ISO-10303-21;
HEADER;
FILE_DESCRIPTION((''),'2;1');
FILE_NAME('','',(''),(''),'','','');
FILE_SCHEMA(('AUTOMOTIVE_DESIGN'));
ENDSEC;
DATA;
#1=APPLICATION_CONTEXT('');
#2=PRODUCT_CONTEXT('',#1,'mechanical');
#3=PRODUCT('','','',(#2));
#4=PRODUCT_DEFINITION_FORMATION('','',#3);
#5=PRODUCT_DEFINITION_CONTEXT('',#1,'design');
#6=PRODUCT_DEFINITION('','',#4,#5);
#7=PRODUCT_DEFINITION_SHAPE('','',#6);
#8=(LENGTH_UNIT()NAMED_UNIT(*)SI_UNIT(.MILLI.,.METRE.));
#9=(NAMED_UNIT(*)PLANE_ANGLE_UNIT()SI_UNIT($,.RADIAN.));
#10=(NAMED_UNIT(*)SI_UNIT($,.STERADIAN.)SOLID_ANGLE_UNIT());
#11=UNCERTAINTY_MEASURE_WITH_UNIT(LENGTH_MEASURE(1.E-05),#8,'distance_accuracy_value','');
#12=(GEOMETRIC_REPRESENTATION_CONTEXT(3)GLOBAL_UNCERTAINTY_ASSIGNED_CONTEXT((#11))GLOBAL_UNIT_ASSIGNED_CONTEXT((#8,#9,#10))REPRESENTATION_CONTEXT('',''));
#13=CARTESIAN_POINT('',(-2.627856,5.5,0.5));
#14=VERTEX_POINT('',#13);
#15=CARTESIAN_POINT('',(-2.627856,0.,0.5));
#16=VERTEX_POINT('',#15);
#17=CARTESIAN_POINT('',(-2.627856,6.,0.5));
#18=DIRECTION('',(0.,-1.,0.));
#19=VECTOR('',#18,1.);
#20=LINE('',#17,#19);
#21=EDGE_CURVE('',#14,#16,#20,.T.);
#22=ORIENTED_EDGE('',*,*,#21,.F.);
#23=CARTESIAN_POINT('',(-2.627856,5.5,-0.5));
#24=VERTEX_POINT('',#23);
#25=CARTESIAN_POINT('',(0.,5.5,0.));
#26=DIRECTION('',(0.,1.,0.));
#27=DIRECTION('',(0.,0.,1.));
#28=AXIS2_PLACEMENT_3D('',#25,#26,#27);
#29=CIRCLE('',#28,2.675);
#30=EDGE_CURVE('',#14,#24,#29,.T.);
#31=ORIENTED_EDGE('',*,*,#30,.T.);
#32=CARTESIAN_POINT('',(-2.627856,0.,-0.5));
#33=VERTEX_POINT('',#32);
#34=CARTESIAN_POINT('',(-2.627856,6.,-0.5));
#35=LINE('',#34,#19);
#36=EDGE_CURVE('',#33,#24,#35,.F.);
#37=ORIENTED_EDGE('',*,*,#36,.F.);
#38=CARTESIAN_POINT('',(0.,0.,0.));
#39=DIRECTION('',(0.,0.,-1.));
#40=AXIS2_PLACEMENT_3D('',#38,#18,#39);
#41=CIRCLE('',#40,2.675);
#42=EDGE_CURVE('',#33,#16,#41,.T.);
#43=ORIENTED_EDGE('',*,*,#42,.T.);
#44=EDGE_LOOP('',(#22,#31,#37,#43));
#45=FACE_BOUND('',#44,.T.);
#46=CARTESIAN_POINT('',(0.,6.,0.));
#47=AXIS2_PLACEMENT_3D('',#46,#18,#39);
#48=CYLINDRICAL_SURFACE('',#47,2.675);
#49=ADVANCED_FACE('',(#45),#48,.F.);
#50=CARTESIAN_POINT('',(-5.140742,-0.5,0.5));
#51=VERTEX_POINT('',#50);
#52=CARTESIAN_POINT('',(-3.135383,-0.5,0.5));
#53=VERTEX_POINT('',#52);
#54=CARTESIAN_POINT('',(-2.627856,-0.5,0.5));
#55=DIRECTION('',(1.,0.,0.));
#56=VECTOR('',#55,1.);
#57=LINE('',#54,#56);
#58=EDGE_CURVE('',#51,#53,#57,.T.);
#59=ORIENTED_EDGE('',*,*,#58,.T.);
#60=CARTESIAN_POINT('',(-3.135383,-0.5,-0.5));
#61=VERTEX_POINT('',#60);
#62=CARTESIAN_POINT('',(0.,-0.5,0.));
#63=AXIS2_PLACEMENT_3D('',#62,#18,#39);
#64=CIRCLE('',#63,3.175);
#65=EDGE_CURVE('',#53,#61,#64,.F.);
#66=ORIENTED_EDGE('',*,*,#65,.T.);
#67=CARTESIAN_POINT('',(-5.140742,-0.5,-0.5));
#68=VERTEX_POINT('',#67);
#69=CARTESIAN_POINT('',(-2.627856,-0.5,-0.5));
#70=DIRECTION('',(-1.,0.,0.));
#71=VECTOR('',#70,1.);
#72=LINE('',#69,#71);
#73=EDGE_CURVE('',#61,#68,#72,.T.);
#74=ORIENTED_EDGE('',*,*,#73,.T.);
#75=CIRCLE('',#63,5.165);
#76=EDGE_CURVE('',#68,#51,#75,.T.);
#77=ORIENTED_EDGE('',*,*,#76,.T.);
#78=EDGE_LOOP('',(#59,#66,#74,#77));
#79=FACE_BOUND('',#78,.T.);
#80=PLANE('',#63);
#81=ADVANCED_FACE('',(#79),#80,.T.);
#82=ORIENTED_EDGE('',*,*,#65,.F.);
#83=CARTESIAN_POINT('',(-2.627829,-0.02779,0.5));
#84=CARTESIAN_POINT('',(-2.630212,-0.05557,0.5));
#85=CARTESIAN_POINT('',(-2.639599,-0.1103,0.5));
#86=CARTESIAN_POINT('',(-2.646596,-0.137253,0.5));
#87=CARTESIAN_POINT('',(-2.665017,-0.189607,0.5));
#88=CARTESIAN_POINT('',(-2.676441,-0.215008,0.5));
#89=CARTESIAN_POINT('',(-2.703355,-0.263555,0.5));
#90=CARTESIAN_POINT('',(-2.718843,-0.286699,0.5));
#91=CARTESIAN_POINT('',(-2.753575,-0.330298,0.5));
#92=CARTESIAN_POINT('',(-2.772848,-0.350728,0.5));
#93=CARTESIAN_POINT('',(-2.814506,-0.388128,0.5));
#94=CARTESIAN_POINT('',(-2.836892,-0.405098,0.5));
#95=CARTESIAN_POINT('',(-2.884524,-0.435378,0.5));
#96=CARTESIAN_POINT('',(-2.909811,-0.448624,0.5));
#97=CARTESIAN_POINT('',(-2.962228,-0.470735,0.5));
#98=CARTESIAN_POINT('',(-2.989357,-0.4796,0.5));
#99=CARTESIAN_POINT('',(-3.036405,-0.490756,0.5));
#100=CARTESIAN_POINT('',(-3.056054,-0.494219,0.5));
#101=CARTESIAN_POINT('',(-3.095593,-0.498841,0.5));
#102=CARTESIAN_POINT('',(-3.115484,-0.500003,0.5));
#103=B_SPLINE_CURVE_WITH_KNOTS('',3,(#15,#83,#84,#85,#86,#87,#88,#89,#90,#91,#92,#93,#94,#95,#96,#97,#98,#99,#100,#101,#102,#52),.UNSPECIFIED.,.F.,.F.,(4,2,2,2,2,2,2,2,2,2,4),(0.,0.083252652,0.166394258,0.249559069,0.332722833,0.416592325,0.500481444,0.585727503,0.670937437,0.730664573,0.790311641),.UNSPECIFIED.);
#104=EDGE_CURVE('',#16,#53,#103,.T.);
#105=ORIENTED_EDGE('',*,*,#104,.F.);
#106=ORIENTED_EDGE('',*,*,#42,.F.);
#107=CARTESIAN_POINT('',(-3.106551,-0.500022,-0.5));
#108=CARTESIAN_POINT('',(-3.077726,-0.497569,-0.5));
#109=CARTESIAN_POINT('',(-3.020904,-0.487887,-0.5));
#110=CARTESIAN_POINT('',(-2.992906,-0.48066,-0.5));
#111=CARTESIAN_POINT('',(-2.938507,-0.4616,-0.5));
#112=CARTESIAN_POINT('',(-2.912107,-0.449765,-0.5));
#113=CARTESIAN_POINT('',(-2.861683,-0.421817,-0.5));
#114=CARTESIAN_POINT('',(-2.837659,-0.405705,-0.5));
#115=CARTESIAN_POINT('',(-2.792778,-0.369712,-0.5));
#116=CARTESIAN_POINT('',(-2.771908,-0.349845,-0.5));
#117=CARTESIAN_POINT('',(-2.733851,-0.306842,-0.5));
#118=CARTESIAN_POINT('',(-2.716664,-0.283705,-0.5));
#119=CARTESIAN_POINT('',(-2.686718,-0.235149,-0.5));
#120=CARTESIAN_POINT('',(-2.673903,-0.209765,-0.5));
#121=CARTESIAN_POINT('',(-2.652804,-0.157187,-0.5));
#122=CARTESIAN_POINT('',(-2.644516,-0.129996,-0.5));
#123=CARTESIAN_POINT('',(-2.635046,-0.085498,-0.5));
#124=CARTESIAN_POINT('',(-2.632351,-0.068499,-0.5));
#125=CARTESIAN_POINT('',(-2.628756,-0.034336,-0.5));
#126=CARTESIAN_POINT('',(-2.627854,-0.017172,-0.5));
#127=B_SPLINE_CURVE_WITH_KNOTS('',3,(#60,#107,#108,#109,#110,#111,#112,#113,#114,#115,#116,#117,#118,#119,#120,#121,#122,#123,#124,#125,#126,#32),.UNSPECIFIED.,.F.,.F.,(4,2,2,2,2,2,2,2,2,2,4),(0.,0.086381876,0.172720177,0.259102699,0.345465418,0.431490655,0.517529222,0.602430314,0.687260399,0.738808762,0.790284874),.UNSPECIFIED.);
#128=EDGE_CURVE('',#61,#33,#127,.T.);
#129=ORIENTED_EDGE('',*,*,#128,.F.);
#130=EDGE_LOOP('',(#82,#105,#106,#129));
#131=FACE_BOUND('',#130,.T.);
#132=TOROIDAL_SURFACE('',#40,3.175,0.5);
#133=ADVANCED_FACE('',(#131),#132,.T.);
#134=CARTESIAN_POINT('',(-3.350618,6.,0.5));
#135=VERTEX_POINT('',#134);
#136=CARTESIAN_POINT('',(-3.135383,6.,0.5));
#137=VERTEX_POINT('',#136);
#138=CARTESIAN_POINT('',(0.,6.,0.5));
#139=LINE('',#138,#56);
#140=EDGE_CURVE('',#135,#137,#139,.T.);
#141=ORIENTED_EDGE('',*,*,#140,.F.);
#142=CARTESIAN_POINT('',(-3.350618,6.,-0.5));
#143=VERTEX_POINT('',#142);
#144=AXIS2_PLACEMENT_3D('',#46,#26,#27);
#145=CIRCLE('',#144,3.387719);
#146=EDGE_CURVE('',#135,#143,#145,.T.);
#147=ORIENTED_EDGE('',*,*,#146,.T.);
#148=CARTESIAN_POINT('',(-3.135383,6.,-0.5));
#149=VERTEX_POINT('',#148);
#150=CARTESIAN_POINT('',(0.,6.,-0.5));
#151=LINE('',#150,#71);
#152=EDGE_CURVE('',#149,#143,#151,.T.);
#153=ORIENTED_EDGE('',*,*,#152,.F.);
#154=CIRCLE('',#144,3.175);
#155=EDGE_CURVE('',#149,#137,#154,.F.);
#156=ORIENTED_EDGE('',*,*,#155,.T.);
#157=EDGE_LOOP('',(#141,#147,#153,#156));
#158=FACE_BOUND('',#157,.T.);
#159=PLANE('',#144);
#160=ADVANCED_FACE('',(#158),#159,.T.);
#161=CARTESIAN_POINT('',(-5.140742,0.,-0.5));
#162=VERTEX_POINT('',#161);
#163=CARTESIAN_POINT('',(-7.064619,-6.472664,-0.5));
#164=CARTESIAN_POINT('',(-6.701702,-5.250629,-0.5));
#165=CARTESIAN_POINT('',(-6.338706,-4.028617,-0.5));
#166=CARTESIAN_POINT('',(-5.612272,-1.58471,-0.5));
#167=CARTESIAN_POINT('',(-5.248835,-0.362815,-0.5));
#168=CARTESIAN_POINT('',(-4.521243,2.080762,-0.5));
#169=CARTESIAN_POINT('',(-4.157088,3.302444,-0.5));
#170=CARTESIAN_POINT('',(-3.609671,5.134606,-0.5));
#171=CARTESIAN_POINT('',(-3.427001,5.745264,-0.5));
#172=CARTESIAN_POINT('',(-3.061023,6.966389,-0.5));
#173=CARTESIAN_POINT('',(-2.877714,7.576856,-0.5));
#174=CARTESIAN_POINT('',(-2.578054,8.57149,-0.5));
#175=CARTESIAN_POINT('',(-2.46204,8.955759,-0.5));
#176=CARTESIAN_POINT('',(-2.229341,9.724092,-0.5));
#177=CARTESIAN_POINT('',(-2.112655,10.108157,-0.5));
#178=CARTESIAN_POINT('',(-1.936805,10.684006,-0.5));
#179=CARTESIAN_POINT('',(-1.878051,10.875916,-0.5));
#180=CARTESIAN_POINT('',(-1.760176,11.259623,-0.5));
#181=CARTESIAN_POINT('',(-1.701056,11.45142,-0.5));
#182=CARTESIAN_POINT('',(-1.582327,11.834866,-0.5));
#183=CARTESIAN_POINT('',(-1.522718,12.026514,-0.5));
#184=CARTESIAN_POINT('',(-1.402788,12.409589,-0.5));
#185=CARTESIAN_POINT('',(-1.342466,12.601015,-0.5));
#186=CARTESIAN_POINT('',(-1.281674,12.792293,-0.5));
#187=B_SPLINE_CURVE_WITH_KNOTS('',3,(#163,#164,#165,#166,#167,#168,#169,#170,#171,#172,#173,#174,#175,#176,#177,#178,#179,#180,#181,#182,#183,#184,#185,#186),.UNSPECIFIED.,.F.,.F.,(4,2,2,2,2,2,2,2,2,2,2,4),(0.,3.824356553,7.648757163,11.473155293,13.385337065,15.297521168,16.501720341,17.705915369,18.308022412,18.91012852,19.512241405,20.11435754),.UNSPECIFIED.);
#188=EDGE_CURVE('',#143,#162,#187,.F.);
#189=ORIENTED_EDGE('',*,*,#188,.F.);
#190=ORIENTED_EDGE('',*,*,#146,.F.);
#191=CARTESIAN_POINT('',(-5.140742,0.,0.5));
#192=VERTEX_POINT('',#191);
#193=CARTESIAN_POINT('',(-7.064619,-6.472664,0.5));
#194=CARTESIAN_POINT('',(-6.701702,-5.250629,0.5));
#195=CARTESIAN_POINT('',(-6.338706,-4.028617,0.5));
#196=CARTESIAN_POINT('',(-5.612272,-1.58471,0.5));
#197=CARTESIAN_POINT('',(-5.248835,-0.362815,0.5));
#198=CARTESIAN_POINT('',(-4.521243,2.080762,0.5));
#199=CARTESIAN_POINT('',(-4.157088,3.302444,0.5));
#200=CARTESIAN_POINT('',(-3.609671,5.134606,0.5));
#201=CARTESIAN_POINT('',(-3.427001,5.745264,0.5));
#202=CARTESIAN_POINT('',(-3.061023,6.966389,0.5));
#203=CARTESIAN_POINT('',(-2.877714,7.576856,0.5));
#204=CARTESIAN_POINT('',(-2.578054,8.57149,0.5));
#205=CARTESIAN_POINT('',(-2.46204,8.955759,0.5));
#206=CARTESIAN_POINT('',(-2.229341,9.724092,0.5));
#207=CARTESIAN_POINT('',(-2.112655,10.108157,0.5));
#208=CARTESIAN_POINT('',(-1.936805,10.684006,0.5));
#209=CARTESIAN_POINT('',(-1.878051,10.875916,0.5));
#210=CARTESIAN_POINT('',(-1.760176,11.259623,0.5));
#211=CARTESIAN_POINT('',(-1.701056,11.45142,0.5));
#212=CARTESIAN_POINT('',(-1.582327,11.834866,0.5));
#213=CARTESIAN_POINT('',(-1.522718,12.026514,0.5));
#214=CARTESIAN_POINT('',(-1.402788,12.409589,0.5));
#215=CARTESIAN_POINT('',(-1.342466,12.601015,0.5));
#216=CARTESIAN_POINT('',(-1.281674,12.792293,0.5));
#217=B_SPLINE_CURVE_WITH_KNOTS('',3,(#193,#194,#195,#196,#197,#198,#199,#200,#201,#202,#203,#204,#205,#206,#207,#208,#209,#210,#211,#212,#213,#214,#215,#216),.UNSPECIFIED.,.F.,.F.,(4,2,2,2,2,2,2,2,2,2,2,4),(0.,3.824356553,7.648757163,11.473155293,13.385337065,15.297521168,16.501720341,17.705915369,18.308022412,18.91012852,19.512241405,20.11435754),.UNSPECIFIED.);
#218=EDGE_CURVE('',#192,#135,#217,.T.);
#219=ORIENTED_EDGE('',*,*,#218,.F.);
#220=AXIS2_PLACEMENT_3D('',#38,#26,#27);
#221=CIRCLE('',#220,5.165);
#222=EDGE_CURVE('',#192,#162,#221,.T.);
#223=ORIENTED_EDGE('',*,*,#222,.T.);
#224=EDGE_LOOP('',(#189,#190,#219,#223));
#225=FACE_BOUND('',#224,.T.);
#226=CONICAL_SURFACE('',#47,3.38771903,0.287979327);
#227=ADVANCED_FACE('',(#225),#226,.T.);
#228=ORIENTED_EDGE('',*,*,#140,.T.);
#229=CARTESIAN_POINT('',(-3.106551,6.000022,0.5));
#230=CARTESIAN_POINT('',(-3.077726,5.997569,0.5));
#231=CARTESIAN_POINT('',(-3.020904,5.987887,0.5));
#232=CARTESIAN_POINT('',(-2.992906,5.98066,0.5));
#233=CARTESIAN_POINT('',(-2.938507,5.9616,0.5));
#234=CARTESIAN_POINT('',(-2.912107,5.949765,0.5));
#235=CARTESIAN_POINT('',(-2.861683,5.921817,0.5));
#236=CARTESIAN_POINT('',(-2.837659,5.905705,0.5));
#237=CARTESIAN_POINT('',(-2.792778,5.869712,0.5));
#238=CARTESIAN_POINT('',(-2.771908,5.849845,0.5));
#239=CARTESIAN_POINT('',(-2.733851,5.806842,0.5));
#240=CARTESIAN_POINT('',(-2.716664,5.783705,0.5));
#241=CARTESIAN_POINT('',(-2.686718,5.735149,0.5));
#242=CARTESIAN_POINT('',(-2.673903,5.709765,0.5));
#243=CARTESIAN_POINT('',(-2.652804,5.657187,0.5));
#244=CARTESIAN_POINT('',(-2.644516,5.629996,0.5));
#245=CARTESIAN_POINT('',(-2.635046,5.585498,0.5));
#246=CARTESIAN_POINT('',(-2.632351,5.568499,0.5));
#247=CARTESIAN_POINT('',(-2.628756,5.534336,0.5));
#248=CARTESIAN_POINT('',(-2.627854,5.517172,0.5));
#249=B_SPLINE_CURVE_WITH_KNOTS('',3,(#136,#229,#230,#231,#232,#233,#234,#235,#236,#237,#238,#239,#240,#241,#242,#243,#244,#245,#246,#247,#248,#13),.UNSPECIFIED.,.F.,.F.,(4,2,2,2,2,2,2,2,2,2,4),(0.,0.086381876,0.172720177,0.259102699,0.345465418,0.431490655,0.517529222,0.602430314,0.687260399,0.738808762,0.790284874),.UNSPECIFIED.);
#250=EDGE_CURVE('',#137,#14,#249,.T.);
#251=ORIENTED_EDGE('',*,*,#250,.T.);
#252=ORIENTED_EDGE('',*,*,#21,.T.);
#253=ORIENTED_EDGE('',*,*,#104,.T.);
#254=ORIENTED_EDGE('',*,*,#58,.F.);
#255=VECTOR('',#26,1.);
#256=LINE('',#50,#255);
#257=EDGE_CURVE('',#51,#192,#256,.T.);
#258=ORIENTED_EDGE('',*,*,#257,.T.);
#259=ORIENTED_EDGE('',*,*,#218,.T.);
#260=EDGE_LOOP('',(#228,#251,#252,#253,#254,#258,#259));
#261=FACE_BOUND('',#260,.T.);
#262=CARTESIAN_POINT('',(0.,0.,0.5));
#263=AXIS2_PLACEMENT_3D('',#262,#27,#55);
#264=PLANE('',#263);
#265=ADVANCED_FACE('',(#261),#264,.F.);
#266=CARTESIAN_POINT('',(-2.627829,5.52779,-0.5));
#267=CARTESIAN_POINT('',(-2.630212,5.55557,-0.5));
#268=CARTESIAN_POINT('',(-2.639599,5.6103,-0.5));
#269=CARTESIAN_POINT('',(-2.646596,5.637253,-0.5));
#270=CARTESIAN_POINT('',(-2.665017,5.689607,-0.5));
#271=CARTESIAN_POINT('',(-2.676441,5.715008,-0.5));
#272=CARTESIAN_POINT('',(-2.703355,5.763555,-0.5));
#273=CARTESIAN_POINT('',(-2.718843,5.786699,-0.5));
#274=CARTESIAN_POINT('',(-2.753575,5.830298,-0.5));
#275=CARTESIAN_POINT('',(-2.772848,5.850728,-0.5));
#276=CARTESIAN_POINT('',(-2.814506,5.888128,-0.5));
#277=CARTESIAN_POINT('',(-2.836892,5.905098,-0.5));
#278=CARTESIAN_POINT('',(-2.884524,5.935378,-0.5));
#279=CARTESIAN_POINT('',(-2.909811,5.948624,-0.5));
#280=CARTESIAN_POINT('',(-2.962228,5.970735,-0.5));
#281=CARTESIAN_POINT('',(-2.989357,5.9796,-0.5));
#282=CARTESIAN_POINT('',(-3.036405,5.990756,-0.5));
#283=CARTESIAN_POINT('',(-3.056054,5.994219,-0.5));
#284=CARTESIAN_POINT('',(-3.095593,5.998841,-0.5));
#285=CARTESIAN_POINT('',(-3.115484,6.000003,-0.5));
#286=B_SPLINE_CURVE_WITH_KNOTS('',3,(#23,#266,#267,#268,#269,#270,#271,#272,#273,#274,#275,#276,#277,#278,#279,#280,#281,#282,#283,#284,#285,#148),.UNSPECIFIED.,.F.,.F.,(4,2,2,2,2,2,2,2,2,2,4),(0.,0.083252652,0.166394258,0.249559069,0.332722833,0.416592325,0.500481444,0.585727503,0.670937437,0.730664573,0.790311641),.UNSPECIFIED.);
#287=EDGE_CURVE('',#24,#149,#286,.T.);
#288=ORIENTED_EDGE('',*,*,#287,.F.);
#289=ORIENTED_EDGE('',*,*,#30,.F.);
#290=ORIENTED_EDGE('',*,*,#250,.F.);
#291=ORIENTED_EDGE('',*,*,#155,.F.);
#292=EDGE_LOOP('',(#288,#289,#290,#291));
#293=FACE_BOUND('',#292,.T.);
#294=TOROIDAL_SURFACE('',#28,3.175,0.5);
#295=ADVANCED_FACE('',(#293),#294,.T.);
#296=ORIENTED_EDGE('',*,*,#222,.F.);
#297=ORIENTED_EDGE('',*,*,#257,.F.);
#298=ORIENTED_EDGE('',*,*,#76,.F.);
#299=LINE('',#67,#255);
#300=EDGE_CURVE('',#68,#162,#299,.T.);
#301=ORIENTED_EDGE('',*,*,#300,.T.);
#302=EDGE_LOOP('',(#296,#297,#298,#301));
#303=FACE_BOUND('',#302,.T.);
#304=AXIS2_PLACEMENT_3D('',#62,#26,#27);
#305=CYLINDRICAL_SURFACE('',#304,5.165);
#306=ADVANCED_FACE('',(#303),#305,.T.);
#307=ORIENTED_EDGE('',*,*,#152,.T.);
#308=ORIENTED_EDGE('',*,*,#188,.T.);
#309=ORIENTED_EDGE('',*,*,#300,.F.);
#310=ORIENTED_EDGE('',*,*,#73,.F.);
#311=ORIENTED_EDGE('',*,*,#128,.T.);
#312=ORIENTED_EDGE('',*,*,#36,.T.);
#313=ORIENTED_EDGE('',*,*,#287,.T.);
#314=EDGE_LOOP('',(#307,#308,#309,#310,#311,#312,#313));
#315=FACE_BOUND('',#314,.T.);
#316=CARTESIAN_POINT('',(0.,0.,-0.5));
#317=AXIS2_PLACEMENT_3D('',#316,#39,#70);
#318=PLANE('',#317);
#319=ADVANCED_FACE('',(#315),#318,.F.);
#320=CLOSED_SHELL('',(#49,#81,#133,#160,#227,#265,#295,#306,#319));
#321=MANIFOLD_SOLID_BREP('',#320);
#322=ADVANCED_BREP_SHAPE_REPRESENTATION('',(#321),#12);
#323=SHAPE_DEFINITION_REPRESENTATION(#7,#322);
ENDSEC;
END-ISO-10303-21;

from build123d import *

# Parameters (mm, degrees)
SKETCH1_R           = 5.164999999999999
SKETCH1_R_2         = 2.675
BOSS_EXTRUDE1_DEPTH = 6
CHAMFER1_SIZE       = 6
CHAMFER1_SIZE_2     = 1.77728097
CUT_EXTRUDE1_DEPTH  = 10.452748277617466
BOSS_EXTRUDE2_START = 0.5
BOSS_EXTRUDE2_DEPTH = 0.5
FILLET1_R           = 0.5


with BuildPart() as part:
    # Sketch1 → Boss-Extrude1 (new body)
    with BuildSketch(Plane(origin=(0, 0, 0), x_dir=(1, 0, 0), z_dir=(0, 1, 0))):
        with Locations(Location((0, 0, 0), (0, 0, 270))):
            Circle(SKETCH1_R)
        with Locations(Location((0, 0, 0), (0, 0, 270))):
            Circle(SKETCH1_R_2, mode=Mode.SUBTRACT)
    extrude(amount=BOSS_EXTRUDE1_DEPTH)

    # Chamfer1
    # the kernel refuses this chamfer: 6, 1.77728097 mm, written as the material it takes off along each edge
    with BuildSketch(Plane(origin=(0, 6, 0), x_dir=(-1.8e-16, 0, 1), z_dir=(-1, 0, -1.8e-16))) as chamfer1_piece_1:
        Polygon((5.164999999999999, -CHAMFER1_SIZE), (5.164999999999999 - CHAMFER1_SIZE_2, 0), (5.164999999999999, 0), align=None)
    revolve(axis=Axis((0, 6, 0), (0, 1, 0)), mode=Mode.SUBTRACT)

    # Sketch2 → Cut-Extrude1 (cut, through all)
    with BuildSketch(Plane(origin=(0, 6, 0), x_dir=(1, 0, 0), z_dir=(0, 1, 0))):
        Polygon((-6e-17, 0.5), (-6.017243985575578, 0.4999999999999993), (-6.017243985575578, -0.5000000000000008), (6e-17, -0.5), align=None)
    extrude(amount=-CUT_EXTRUDE1_DEPTH, mode=Mode.SUBTRACT)

    # Sketch3 → Boss-Extrude2 (add)
    with BuildSketch(Plane.XZ.offset(BOSS_EXTRUDE2_START)):
        with BuildLine():
            Line((-2.6278555896395814, -0.4999999999999993), (-5.140741678007149, -0.49999999999999917))
            ThreePointArc((-5.140741678007149, -0.49999999999999917), (5.164999999999977, -2.29e-15), (-5.140741678007172, 0.5000000000000027))
            Line((-5.140741678007172, 0.5000000000000027), (-2.627855589639582, 0.5000000000000001))
            ThreePointArc((-2.627855589639582, 0.5000000000000001), (2.6749999999999985, 0), (-2.6278555896395814, -0.4999999999999993))
        make_face()
    extrude(amount=-BOSS_EXTRUDE2_DEPTH)

    # Fillet1
    fillet1_edges = [part.edges().sort_by_distance(p)[0] for p in [
        (2.6750000000000003, 6, -1.288e-14),
        (2.674999999999999, -0.5, 5.4e-16),
    ]]
    fillet(fillet1_edges, radius=FILLET1_R)


solid = part.part
